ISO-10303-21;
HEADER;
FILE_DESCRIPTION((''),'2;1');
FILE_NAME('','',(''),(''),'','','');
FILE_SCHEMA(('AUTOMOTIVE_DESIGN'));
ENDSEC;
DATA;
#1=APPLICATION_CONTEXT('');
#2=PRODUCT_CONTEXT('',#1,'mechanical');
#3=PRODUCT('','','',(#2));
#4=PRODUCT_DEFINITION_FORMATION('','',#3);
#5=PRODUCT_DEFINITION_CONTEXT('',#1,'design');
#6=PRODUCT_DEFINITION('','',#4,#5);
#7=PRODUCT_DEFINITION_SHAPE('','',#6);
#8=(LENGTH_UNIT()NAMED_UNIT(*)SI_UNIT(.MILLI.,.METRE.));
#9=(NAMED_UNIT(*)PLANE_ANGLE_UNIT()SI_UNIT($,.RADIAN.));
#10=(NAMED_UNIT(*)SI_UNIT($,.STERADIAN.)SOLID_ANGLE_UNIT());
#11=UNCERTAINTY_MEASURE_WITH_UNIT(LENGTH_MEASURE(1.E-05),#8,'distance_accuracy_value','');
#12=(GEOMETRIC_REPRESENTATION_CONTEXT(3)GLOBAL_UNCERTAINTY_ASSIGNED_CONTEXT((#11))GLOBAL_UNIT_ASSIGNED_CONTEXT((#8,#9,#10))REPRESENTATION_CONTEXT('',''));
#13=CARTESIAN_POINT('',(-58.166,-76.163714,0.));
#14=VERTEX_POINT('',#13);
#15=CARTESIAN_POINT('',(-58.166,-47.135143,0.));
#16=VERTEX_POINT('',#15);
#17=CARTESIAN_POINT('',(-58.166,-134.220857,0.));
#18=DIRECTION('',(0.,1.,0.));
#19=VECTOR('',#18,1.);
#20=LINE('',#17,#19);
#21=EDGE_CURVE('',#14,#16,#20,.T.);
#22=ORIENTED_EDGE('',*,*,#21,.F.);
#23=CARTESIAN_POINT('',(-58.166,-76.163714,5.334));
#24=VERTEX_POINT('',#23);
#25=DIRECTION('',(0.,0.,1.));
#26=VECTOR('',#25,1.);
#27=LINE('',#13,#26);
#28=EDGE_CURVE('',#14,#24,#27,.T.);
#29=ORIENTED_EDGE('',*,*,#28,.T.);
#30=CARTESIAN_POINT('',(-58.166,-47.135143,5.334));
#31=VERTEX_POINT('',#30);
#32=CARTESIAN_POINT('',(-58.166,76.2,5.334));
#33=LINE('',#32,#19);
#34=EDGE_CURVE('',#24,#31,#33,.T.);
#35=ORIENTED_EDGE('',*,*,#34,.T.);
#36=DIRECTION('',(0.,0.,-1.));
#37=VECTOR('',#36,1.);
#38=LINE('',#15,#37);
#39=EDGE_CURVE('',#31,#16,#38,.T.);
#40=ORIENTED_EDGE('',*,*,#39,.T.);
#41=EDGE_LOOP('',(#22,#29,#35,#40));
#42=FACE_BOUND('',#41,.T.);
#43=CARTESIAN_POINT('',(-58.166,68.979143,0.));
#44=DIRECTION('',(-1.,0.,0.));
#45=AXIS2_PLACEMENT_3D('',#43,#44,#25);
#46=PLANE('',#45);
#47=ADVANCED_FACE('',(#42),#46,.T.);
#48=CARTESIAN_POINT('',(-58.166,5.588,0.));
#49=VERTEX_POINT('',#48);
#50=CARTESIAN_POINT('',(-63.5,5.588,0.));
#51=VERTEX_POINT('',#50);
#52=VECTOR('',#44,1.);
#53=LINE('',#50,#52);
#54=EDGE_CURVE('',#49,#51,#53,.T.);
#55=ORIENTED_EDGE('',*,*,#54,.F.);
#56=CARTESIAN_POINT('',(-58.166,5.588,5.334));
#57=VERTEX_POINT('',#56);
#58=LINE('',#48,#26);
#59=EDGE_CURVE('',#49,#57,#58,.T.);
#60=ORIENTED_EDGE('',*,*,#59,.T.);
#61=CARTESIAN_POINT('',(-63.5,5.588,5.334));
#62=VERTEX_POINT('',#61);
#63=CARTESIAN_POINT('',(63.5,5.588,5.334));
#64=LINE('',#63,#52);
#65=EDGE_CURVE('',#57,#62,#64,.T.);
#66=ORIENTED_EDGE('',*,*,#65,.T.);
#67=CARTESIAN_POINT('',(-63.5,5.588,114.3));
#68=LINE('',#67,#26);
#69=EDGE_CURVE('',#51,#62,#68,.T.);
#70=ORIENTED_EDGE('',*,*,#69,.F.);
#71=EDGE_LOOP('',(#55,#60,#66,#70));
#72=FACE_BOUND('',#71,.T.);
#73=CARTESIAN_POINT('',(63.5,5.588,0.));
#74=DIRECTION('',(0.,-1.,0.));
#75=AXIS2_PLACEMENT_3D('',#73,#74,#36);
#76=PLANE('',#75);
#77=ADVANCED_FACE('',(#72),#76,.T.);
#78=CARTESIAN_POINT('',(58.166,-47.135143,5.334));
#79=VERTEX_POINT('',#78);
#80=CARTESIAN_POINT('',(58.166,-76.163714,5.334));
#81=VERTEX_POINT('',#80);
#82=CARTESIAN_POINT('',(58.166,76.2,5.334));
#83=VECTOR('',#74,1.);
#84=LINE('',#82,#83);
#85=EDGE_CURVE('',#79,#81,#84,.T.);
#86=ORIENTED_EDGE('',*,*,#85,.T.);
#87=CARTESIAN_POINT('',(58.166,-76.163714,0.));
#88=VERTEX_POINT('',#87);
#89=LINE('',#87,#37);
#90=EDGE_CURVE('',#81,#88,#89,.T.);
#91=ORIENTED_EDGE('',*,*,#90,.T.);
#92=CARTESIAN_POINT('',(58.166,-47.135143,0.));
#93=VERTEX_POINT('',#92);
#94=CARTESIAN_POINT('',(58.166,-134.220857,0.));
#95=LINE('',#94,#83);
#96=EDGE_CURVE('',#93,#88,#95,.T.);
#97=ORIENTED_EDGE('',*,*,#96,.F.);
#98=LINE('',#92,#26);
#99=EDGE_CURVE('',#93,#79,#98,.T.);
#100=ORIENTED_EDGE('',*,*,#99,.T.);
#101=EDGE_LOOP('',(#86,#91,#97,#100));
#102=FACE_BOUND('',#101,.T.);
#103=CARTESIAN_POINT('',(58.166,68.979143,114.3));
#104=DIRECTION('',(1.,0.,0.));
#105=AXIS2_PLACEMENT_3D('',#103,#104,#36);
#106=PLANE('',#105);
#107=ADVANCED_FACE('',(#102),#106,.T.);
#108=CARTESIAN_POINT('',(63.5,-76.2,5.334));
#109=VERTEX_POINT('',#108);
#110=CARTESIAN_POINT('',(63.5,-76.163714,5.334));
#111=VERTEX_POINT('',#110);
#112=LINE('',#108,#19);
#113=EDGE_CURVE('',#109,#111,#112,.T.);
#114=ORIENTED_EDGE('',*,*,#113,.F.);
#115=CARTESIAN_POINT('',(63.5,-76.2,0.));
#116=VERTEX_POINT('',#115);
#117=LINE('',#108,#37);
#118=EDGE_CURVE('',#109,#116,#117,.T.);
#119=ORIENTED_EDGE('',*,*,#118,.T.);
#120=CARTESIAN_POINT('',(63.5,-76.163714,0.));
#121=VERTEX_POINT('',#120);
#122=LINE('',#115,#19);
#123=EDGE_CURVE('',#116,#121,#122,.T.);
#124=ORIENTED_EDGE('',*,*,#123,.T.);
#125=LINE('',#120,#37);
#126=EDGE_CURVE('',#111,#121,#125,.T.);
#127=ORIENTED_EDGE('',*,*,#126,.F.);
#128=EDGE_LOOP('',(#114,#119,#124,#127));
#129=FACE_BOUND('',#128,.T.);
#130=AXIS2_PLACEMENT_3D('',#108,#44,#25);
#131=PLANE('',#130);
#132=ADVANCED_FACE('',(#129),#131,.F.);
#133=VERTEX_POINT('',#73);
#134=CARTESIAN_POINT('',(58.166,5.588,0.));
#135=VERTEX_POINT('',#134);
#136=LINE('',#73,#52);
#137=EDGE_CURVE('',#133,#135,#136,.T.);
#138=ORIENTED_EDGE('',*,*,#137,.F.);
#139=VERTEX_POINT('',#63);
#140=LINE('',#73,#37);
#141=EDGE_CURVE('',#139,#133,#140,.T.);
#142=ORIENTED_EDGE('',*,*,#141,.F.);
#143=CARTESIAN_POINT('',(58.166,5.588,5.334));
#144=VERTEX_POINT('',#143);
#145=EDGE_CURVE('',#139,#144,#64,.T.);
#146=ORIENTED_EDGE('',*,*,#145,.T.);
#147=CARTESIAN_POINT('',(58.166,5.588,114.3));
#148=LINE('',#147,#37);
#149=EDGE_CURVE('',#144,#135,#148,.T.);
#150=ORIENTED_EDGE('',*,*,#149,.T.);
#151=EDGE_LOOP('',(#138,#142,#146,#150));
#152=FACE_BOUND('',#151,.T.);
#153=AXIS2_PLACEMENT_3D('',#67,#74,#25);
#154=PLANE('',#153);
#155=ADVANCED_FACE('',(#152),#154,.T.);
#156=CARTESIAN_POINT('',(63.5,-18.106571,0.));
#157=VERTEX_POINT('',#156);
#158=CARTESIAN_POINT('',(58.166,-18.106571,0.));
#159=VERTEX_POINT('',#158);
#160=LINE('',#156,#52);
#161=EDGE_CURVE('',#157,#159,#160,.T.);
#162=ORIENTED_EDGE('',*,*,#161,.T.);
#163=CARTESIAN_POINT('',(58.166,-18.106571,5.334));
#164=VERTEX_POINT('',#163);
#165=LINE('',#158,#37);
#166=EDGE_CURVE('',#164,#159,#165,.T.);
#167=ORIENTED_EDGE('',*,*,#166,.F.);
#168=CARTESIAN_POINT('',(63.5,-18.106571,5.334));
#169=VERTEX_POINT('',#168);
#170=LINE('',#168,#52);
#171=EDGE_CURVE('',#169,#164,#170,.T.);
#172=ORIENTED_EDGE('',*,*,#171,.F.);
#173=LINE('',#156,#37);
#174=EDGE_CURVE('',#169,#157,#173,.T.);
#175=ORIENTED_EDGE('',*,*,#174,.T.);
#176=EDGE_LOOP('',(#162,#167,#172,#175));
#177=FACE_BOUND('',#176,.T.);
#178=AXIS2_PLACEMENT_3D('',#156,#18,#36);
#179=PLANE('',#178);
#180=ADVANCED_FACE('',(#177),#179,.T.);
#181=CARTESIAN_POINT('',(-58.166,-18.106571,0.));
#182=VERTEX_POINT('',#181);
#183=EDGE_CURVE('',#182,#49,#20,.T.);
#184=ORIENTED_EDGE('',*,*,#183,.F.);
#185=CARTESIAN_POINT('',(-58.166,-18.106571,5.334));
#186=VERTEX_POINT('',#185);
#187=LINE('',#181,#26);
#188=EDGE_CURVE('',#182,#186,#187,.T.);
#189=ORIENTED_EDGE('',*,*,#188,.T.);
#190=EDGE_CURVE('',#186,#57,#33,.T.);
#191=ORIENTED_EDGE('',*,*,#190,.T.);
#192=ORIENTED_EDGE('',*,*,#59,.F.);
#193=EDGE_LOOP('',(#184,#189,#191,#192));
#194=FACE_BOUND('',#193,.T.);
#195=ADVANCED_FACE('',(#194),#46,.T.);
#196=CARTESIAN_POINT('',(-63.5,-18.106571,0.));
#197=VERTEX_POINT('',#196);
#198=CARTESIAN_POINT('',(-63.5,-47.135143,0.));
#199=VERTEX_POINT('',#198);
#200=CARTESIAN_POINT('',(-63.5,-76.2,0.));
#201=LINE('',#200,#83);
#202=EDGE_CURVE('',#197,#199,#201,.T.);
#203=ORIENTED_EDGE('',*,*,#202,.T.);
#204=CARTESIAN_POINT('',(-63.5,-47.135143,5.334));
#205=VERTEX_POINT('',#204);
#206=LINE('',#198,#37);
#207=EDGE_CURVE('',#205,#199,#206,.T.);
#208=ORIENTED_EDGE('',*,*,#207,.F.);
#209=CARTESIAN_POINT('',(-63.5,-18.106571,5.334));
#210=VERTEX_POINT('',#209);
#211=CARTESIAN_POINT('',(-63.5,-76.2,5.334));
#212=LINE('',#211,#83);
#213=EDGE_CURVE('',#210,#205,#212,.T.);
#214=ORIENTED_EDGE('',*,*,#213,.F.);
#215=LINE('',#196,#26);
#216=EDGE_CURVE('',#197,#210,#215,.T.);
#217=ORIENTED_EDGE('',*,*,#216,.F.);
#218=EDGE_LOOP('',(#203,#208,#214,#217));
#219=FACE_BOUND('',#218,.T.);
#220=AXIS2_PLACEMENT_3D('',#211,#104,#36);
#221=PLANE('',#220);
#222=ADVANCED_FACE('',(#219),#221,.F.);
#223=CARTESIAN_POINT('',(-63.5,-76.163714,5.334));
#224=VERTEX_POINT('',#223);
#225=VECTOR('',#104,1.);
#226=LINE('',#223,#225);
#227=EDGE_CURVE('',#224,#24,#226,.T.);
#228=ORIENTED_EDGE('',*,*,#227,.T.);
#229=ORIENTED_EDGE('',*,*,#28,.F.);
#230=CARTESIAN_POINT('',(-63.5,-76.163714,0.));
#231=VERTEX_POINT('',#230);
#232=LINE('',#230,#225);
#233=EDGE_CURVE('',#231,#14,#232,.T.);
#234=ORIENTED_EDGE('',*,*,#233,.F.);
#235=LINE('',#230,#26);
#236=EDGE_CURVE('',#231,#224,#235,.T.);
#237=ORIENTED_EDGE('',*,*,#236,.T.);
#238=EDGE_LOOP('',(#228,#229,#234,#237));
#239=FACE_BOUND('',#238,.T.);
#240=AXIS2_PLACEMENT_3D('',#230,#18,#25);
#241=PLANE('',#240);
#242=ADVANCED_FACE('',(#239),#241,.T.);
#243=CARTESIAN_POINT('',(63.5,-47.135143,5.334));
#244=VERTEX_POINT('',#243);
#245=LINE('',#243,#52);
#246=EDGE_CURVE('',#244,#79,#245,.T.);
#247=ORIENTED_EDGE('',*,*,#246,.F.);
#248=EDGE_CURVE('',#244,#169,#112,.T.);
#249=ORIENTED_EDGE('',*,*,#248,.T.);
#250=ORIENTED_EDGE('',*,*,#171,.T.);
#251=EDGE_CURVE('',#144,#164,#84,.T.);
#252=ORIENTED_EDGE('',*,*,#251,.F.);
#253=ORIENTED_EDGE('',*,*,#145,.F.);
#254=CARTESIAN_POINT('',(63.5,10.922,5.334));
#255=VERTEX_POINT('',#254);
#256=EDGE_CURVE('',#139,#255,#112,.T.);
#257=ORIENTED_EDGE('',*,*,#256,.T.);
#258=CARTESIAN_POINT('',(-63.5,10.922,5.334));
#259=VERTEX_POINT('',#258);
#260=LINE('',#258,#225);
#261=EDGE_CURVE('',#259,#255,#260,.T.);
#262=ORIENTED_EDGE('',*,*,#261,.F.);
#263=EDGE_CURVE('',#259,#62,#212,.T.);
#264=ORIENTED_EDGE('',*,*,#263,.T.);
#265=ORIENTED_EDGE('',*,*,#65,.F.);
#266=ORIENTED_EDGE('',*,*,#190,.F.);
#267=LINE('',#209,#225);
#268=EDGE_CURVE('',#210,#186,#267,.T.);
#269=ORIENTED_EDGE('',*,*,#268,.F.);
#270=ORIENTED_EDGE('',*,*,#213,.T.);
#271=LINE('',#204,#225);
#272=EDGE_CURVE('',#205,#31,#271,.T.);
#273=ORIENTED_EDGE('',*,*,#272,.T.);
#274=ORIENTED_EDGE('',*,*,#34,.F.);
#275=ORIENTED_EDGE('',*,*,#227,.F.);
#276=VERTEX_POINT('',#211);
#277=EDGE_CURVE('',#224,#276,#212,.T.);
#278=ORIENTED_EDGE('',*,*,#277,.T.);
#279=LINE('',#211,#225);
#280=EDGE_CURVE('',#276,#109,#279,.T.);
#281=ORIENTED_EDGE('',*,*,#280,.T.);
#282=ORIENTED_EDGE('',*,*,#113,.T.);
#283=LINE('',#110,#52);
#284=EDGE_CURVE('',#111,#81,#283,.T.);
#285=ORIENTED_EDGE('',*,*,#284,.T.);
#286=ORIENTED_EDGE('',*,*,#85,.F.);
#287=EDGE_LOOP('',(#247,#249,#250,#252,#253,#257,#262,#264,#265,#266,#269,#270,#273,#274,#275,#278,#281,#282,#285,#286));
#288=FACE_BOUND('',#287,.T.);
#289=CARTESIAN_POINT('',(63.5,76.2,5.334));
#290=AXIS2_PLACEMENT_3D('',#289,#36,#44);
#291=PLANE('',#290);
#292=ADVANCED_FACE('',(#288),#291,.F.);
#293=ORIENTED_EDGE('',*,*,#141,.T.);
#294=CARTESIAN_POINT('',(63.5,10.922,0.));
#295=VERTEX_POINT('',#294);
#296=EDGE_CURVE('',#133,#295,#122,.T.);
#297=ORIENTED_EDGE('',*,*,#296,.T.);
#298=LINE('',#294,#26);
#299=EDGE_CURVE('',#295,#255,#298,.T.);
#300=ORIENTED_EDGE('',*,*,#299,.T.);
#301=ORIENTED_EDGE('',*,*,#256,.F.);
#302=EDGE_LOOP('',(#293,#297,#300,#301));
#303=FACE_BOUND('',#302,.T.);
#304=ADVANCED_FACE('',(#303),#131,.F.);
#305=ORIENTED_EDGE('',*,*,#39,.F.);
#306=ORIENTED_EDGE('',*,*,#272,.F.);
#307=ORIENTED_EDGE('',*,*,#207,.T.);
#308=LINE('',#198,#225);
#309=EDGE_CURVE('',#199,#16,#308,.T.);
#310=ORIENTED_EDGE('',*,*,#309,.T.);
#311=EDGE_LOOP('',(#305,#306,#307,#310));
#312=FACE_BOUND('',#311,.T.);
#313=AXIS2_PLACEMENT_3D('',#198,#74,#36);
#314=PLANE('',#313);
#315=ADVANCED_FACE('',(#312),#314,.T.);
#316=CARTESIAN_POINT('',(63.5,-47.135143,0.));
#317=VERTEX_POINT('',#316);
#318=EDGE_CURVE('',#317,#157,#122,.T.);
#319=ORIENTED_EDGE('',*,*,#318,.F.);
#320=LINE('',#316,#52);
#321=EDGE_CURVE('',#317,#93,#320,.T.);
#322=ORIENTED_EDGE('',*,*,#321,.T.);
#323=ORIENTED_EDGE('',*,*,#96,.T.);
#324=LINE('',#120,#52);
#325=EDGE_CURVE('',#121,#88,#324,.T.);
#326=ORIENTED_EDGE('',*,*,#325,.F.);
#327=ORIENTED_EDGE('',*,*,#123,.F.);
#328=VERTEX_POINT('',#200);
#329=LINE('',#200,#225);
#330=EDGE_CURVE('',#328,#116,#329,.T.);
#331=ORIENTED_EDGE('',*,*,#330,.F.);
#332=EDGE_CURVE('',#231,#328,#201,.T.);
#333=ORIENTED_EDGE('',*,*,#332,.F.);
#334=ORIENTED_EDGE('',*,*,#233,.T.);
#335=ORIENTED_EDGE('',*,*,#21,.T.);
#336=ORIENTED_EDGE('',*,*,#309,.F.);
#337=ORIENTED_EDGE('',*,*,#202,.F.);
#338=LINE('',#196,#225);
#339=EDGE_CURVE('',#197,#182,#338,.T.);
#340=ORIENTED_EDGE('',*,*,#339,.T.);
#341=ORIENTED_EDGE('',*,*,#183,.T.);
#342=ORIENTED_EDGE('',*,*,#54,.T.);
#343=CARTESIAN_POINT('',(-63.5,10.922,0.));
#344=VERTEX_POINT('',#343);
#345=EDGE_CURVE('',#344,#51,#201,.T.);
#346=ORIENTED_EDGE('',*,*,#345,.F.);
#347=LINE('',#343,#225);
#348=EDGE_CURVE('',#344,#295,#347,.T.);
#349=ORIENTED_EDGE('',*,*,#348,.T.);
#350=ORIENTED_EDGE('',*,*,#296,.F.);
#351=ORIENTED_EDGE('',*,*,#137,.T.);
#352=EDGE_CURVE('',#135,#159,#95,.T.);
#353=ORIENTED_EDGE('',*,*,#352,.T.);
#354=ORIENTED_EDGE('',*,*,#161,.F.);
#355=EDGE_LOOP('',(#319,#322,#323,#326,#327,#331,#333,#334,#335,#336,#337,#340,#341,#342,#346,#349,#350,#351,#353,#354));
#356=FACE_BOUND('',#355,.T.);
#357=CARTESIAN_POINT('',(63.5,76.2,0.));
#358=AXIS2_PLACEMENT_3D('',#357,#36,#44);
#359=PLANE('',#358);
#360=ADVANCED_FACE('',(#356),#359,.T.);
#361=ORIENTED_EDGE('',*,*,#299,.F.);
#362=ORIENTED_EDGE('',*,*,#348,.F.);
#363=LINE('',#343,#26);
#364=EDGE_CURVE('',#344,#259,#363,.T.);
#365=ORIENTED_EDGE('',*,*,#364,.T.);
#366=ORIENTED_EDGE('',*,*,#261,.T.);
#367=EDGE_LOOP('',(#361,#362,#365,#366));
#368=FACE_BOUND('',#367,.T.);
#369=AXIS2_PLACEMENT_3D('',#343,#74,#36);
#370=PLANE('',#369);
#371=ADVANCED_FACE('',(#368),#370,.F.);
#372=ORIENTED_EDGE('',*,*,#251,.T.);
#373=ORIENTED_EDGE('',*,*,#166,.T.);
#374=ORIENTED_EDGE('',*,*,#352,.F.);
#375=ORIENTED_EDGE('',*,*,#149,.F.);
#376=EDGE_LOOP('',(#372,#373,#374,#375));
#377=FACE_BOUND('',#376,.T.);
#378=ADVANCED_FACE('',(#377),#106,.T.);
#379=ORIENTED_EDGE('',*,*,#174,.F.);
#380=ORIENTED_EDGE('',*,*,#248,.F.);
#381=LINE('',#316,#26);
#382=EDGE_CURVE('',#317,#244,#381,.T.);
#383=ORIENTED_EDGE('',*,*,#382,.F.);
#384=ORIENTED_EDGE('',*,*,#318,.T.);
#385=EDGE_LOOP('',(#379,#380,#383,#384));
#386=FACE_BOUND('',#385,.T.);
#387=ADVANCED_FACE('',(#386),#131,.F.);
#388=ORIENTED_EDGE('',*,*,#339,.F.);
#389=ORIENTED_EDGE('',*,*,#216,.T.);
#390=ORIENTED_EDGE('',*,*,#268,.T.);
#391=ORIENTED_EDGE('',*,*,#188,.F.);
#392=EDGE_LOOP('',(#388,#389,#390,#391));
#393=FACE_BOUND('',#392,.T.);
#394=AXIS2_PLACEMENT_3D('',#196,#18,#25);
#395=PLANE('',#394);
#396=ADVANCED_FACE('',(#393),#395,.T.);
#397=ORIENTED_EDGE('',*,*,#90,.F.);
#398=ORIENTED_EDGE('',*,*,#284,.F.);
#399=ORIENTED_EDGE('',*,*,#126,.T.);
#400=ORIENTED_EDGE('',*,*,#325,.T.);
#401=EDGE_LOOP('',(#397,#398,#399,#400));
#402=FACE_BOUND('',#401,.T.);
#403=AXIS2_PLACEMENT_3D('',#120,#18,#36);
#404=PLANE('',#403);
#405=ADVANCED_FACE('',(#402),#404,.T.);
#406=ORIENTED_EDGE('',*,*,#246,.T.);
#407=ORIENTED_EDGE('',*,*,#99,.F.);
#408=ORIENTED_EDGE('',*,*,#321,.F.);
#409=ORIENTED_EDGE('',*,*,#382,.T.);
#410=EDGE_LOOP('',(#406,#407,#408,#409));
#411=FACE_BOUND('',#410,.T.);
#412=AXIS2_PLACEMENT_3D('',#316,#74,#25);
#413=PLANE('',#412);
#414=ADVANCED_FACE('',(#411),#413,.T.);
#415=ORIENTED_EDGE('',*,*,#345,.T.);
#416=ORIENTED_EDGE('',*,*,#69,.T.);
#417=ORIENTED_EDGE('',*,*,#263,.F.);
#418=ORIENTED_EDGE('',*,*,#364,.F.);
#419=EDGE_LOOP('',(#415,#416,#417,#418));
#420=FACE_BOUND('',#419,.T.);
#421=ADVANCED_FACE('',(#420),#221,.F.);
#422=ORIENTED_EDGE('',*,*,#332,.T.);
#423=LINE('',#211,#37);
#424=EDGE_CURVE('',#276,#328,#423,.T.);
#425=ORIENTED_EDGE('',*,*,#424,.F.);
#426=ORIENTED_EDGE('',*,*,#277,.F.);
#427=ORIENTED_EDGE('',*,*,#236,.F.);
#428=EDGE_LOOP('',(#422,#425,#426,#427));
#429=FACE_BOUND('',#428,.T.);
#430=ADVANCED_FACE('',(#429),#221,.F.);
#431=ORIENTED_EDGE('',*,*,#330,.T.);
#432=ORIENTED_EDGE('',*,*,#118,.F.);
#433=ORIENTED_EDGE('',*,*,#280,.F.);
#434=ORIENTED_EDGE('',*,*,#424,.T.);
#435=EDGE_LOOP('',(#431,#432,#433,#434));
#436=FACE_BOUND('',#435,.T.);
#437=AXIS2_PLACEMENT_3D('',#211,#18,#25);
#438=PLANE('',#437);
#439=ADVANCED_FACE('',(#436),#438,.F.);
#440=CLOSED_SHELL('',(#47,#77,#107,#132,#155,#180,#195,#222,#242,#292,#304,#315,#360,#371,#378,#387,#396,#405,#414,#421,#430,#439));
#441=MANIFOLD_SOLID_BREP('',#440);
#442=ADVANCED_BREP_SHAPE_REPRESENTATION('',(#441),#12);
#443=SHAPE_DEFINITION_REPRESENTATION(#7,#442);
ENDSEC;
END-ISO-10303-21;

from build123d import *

# Parameters (mm, degrees)
SKETCH2_W           = 127
SKETCH2_H           = 152.4
BOSS_EXTRUDE2_DEPTH = 5.334
SKETCH3_W           = 127
SKETCH3_H           = 65.278
CUT_EXTRUDE1_DEPTH  = 100.333486579
CAVITY1_START       = -76.163714286
CAVITY1_OUTLINE_W   = 5.334
CAVITY1_OUTLINE_H   = 5.334
CAVITY1_DEPTH       = 29.028571429
CAVITY1_START_2     = -18.106571429
CAVITY1_2_OUTLINE_W = 5.334
CAVITY1_2_OUTLINE_H = 5.334
CAVITY1_2_DEPTH     = 23.694571429


# Read off the part's stored shape, not the designer's step: Cavity1
with BuildPart() as part:
    # Sketch2 → Boss-Extrude2 (new body)
    with BuildSketch(Plane.XY):
        Rectangle(SKETCH2_W, SKETCH2_H)
    extrude(amount=BOSS_EXTRUDE2_DEPTH)

    # Sketch3 → Cut-Extrude1 (cut, through all)
    with BuildSketch(Plane.XY.offset(5.334)):
        with Locations((0, 43.561)):
            Rectangle(SKETCH3_W, SKETCH3_H)
    extrude(amount=-CUT_EXTRUDE1_DEPTH, mode=Mode.SUBTRACT)

    # Cavity1 outline → Cavity1 (cut)
    with BuildSketch(Plane(origin=(0, 0, 0), x_dir=(1, 0, 0), z_dir=(0, 1, 0)).offset(CAVITY1_START)):
        with Locations((60.833, -2.667)):
            Rectangle(CAVITY1_OUTLINE_W, CAVITY1_OUTLINE_H)
        with Locations((-60.833, -2.667)):
            Rectangle(CAVITY1_OUTLINE_W, CAVITY1_OUTLINE_H)
    extrude(amount=CAVITY1_DEPTH, mode=Mode.SUBTRACT)

    # Cavity1 2 outline → Cavity1 2 (cut)
    with BuildSketch(Plane(origin=(0, 0, 0), x_dir=(1, 0, 0), z_dir=(0, 1, 0)).offset(CAVITY1_START_2)):
        with Locations((60.833, -2.667)):
            Rectangle(CAVITY1_2_OUTLINE_W, CAVITY1_2_OUTLINE_H)
        with Locations((-60.833, -2.667)):
            Rectangle(CAVITY1_2_OUTLINE_W, CAVITY1_2_OUTLINE_H)
    extrude(amount=CAVITY1_2_DEPTH, mode=Mode.SUBTRACT)


solid = part.part
